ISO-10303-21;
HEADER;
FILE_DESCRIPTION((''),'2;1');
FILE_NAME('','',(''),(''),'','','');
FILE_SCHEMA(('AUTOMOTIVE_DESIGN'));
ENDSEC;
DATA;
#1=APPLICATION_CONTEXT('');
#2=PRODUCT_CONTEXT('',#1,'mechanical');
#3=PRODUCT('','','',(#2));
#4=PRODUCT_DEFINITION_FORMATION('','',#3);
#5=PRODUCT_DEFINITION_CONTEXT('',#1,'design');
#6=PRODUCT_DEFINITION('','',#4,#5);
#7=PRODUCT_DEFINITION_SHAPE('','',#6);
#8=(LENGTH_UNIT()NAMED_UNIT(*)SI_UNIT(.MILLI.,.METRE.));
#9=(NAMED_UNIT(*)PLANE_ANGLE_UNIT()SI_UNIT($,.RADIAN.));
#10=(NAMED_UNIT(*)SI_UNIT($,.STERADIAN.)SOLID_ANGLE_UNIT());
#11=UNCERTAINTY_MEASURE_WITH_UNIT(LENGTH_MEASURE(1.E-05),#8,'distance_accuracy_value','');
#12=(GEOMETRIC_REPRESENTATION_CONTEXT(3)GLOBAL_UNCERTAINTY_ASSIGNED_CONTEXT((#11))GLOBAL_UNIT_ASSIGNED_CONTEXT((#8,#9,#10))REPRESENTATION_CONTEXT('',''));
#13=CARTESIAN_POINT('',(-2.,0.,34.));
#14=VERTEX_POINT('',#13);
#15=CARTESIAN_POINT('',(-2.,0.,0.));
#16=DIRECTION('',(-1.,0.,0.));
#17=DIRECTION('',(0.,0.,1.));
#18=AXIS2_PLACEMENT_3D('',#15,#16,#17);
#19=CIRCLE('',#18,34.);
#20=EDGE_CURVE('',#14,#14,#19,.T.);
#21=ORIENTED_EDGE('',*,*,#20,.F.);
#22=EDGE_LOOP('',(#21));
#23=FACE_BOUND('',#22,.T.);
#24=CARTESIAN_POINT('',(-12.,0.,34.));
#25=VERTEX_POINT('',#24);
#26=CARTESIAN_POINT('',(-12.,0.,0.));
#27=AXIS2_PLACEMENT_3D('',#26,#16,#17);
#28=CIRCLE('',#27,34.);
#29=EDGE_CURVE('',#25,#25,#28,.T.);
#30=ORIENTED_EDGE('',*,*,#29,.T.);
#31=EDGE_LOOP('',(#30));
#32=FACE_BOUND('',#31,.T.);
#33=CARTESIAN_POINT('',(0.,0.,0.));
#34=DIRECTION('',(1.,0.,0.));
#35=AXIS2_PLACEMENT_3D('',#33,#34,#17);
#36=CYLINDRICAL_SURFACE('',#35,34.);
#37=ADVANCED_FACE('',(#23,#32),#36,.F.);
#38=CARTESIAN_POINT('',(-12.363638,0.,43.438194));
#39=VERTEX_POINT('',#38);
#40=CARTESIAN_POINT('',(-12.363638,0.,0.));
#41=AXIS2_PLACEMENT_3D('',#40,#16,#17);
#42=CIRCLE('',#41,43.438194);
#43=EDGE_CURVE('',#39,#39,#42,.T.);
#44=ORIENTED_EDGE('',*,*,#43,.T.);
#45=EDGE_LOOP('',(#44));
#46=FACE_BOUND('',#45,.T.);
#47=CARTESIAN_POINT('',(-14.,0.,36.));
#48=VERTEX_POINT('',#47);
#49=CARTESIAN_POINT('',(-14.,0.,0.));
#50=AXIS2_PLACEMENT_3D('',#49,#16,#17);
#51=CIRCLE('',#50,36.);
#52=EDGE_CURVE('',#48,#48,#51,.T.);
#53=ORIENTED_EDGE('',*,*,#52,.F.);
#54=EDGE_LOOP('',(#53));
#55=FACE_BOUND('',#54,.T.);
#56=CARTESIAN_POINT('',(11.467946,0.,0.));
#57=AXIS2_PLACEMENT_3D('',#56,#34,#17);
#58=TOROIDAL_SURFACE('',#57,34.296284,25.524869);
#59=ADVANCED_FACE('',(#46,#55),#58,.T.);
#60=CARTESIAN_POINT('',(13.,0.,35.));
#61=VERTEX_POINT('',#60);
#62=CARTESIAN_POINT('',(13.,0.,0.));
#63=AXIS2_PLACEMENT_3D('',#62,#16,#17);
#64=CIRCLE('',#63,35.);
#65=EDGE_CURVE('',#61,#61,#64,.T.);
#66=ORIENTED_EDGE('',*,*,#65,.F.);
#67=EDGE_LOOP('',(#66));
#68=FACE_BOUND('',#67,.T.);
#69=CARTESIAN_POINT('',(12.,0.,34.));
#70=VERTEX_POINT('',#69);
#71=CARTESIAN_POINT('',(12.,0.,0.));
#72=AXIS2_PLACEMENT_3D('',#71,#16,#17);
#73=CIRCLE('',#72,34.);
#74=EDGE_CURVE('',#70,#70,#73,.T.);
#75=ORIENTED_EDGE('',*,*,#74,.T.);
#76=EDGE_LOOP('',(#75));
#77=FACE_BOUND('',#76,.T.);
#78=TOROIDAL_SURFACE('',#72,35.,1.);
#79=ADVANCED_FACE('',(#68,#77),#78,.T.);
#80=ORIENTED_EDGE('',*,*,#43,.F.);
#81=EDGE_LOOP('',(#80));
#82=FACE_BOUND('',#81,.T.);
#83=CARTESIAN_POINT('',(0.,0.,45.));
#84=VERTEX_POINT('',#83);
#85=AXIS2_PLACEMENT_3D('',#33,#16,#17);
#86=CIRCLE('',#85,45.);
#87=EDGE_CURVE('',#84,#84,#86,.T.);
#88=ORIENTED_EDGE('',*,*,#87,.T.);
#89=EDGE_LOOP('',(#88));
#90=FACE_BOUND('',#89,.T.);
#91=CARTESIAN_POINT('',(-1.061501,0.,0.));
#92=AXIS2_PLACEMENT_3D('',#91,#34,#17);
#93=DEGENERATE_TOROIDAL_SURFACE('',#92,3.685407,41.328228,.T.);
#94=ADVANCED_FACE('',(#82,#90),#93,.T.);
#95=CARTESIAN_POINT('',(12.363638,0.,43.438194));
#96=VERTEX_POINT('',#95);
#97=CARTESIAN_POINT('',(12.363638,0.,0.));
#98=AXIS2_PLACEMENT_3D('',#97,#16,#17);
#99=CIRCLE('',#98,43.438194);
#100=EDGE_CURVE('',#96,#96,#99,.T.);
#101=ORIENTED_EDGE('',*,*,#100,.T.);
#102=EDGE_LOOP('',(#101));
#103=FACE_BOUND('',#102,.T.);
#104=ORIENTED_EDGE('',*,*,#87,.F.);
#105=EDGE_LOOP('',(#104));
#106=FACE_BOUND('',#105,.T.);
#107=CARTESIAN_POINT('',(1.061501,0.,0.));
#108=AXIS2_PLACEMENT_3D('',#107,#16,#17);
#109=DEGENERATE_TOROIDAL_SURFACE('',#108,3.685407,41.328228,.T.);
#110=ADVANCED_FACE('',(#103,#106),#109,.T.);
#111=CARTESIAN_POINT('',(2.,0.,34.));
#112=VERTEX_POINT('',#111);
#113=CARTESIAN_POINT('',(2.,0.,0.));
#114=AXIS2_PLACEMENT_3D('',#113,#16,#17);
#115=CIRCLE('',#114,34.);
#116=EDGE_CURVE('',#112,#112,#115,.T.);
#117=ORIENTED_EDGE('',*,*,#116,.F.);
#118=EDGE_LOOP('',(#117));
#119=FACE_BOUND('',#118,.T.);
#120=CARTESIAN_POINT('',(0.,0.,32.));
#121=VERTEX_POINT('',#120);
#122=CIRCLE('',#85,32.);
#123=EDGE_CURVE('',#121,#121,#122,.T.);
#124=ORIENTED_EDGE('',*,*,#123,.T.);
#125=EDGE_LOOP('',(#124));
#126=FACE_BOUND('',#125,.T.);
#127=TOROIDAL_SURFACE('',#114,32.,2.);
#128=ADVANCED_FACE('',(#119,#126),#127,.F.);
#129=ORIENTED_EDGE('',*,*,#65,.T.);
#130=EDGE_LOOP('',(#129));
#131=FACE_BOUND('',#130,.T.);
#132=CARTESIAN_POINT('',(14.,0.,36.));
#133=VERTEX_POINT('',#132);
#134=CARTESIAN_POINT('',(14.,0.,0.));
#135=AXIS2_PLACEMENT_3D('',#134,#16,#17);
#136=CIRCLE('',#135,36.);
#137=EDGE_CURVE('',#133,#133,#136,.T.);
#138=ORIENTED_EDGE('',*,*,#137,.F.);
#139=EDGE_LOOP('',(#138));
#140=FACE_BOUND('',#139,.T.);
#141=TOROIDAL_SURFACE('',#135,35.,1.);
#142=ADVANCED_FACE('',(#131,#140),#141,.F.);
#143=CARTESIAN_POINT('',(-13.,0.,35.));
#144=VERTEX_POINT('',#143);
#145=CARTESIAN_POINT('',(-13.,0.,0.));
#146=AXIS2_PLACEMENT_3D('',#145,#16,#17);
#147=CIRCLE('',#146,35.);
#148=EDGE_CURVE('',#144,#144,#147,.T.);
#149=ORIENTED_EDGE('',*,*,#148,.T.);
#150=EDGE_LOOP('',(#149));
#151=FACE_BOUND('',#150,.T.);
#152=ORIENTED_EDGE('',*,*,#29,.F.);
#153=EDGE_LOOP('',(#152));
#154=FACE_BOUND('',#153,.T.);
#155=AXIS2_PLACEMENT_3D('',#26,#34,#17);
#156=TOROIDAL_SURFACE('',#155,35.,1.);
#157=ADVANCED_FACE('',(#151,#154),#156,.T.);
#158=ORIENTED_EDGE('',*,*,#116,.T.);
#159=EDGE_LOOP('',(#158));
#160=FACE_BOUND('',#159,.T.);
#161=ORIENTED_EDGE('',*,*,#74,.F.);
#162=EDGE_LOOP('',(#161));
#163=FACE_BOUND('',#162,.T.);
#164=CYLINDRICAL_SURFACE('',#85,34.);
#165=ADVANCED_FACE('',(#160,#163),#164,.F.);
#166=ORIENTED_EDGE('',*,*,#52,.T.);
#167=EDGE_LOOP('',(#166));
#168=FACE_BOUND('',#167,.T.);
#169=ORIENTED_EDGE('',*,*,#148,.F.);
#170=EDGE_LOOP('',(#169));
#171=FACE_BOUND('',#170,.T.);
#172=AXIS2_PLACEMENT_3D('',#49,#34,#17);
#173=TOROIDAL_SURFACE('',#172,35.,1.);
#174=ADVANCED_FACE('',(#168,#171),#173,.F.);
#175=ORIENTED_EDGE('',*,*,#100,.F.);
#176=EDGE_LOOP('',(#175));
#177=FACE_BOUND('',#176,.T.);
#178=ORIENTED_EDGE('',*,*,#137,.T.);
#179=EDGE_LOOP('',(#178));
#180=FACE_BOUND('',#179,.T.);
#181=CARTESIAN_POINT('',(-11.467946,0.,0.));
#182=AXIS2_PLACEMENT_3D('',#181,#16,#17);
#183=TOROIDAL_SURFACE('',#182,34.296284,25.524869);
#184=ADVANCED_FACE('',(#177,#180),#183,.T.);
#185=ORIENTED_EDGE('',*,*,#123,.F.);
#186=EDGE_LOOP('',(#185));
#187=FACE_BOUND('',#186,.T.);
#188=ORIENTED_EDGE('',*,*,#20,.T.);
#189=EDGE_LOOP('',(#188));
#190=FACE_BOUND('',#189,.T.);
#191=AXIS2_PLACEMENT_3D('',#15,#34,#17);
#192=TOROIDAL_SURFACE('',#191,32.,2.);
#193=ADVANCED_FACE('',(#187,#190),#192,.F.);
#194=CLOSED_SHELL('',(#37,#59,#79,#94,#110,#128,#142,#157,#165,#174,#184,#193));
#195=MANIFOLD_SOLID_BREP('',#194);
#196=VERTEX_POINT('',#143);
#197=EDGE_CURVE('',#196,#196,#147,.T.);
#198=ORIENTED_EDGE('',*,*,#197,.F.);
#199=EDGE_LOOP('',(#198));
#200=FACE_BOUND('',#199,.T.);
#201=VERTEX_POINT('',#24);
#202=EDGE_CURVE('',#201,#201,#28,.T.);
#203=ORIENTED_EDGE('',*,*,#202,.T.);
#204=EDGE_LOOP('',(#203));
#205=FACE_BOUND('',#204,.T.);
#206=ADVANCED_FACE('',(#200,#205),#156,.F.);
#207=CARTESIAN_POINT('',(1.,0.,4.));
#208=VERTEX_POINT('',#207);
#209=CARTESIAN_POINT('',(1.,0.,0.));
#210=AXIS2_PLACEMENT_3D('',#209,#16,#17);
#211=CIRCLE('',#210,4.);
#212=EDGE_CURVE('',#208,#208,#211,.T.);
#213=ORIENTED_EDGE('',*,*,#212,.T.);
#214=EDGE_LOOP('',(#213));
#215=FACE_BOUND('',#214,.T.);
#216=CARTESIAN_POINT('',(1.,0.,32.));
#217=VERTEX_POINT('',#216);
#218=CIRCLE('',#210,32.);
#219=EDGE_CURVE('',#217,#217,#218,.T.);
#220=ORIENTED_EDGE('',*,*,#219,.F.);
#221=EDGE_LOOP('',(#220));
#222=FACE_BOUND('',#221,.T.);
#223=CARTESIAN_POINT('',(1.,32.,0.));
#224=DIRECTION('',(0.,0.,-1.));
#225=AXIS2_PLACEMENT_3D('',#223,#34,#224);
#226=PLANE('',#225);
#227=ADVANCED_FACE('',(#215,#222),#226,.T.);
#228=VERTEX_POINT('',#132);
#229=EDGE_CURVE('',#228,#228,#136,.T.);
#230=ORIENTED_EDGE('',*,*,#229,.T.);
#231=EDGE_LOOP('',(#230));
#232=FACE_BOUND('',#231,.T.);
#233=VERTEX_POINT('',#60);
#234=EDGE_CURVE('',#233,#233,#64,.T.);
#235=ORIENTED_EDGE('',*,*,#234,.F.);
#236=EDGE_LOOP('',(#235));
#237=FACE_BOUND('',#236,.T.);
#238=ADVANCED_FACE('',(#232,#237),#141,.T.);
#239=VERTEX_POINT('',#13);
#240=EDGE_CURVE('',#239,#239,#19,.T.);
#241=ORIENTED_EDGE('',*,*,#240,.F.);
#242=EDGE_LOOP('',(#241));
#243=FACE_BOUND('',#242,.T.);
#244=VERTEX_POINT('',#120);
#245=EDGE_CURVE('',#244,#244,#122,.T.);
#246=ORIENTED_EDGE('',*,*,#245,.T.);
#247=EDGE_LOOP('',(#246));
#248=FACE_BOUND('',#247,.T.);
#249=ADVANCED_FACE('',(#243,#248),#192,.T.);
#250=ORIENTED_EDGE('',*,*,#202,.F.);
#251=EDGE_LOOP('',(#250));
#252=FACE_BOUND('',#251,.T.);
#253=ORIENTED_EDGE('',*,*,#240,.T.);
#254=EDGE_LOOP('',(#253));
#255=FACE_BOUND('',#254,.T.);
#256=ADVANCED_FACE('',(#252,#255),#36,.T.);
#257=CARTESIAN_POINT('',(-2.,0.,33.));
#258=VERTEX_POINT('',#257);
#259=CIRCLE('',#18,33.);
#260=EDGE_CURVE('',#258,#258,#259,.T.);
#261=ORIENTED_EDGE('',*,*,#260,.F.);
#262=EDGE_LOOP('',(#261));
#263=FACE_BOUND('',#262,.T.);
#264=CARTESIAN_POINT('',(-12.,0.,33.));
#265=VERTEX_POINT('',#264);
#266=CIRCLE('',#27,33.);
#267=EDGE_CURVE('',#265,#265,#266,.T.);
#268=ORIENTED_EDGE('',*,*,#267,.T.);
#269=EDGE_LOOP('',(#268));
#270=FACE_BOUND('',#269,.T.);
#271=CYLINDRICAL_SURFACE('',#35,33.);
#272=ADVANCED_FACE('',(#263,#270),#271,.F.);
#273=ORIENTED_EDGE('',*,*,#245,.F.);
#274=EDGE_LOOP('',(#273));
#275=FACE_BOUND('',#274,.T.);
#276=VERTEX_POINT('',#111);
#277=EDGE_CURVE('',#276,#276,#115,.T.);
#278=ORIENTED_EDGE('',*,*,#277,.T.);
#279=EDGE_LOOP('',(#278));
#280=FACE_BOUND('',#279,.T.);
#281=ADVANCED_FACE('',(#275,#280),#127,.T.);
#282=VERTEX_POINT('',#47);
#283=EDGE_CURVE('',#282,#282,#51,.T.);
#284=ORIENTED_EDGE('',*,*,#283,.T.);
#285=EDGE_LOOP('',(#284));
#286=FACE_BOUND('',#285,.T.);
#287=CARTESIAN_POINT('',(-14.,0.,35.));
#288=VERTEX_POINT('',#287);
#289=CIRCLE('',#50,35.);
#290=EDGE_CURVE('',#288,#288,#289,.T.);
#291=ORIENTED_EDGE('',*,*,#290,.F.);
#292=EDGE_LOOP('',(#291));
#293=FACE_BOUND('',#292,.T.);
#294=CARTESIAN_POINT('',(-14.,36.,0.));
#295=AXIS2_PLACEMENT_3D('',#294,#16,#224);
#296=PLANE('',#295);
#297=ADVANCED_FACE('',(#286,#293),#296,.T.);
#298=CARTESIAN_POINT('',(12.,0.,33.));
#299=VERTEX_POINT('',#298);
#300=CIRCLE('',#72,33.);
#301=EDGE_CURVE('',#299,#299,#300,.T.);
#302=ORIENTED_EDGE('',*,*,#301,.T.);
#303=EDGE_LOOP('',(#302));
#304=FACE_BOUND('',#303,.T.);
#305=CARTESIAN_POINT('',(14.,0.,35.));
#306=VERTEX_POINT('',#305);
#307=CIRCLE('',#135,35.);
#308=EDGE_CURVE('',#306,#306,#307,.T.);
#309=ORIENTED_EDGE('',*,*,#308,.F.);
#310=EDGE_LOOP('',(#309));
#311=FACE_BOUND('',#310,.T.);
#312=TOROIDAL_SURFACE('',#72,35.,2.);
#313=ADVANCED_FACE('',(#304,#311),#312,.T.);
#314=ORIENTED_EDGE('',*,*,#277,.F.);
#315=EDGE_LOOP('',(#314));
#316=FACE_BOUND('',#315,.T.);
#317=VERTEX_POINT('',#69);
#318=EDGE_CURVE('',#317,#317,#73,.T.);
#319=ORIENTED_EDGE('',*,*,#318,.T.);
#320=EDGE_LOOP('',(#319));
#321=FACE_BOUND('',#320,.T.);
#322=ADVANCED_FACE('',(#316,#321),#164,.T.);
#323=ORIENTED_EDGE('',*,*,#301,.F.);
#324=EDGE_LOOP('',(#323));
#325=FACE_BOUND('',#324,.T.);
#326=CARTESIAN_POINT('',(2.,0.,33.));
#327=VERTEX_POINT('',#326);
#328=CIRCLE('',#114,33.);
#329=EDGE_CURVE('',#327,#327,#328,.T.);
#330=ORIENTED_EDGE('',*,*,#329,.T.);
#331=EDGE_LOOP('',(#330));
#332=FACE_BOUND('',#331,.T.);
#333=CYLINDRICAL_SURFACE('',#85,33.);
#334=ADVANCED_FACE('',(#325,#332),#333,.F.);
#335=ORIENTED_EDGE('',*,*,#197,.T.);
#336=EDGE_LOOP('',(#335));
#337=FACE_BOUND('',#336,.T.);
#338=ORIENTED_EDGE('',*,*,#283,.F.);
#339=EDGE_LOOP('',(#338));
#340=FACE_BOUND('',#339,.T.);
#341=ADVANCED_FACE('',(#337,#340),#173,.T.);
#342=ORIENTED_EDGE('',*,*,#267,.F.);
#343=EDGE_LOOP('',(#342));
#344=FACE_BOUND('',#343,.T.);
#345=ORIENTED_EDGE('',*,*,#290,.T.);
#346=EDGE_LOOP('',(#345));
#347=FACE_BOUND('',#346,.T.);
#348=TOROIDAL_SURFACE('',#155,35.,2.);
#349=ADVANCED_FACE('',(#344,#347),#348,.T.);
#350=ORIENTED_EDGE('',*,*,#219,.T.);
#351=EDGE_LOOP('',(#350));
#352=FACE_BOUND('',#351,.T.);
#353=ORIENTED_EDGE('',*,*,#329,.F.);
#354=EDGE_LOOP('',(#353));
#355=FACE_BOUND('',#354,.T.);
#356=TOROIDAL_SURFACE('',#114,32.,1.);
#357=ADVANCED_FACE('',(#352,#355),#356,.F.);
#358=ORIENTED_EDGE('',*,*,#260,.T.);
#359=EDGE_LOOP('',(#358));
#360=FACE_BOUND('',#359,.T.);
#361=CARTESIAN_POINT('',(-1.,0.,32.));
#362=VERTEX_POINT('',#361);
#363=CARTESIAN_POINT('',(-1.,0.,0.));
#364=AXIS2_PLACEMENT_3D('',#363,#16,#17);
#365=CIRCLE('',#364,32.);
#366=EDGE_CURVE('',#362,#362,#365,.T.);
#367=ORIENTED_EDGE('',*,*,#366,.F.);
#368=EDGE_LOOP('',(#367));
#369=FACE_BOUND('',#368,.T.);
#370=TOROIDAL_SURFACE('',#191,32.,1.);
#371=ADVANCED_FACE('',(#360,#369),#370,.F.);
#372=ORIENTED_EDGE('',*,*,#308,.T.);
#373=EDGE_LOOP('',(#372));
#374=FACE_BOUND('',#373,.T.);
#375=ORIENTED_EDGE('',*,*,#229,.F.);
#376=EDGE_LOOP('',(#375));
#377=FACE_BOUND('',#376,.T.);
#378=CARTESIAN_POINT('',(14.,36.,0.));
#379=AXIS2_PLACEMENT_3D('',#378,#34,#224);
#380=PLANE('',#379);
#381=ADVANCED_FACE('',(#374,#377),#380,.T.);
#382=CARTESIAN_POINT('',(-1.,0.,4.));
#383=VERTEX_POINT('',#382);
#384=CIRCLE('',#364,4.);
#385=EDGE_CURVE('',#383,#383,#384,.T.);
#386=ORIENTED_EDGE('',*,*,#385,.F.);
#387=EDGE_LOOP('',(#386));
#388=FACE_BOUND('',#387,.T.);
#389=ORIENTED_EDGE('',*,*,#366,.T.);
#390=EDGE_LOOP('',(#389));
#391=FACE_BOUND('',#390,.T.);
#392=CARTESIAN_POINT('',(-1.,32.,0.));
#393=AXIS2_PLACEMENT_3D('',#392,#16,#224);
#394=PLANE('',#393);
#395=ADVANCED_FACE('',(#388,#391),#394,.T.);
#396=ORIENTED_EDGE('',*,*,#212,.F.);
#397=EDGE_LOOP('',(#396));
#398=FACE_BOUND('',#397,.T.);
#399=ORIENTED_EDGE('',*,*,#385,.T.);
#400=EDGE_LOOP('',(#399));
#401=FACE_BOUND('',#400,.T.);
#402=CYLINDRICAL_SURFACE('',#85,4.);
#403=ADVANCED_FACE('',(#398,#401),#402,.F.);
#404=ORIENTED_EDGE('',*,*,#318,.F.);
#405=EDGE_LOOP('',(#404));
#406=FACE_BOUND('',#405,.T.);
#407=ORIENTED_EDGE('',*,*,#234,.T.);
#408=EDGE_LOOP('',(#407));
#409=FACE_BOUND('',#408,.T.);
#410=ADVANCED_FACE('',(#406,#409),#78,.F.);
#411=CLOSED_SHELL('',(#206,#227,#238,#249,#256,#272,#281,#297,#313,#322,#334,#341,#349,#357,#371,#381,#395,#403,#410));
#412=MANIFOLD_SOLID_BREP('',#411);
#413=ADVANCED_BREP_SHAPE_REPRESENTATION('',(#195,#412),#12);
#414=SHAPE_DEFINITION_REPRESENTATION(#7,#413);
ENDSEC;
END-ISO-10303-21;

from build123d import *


# Read off the part's stored shape, not the designer's step: Revolve-Thin1
with BuildPart() as part:
    # Revolve-Thin1 outline → Revolve-Thin1 (revolve)
    with BuildSketch(Plane.YX):
        with BuildLine():
            Line((4, 1), (4, 0))
            Line((4, 0), (32, 0))
            ThreePointArc((32, 0), (33.414213562, 0.585786438), (34, 2))
            Line((34, 2), (34, 12))
            ThreePointArc((34, 12), (34.292893219, 12.707106781), (35, 13))
            ThreePointArc((35, 13), (35.707106781, 13.292893219), (36, 14))
            Line((36, 14), (35, 14))
            ThreePointArc((35, 14), (33.585786438, 13.414213562), (33, 12))
            Line((33, 12), (33, 2))
            ThreePointArc((33, 2), (32.707106781, 1.292893219), (32, 1))
            Line((32, 1), (4, 1))
        make_face()
    revolve(axis=Axis((0, 0, 0), (1, 0, 0)))

    # Mirror3: part across plane


with BuildPart() as body_2:
    # Sketch6 → Revolve2 (revolve)
    with BuildSketch(Plane.XY, mode=Mode.PRIVATE) as revolve2_sk:
        with BuildLine():
            Line((0, 32), (0, 45))
            ThreePointArc((0, 45), (6.24102473, 44.687783986), (12.363638048, 43.438194182))
            ThreePointArc((12.363638048, 43.438194182), (13.460804447, 39.780472355), (14, 36))
            ThreePointArc((14, 36), (13.292893219, 35.707106781), (13, 35))
            ThreePointArc((13, 35), (12.707106781, 34.292893219), (12, 34))
            Line((12, 34), (2, 34))
            ThreePointArc((2, 34), (0.585786438, 33.414213562), (0, 32))
        make_face()
    revolve(revolve2_sk.sketch.rotate(Axis((0, 0, 0), (1, 0, 0)), 90), axis=Axis((0, 0, 0), (1, 0, 0)))

    # Mirror3 2: body 2 across plane


with BuildPart() as part_1:
    add(part.part)
    add(part.part.mirror(Plane(origin=(0, 0, 0), x_dir=(0, 0, 1), z_dir=(1, 0, 0))))


with BuildPart() as body_2_1:
    add(body_2.part)
    add(body_2.part.mirror(Plane(origin=(0, 0, 0), x_dir=(0, 0, 1), z_dir=(1, 0, 0))))


solid = Compound([part_1.part, body_2_1.part])
